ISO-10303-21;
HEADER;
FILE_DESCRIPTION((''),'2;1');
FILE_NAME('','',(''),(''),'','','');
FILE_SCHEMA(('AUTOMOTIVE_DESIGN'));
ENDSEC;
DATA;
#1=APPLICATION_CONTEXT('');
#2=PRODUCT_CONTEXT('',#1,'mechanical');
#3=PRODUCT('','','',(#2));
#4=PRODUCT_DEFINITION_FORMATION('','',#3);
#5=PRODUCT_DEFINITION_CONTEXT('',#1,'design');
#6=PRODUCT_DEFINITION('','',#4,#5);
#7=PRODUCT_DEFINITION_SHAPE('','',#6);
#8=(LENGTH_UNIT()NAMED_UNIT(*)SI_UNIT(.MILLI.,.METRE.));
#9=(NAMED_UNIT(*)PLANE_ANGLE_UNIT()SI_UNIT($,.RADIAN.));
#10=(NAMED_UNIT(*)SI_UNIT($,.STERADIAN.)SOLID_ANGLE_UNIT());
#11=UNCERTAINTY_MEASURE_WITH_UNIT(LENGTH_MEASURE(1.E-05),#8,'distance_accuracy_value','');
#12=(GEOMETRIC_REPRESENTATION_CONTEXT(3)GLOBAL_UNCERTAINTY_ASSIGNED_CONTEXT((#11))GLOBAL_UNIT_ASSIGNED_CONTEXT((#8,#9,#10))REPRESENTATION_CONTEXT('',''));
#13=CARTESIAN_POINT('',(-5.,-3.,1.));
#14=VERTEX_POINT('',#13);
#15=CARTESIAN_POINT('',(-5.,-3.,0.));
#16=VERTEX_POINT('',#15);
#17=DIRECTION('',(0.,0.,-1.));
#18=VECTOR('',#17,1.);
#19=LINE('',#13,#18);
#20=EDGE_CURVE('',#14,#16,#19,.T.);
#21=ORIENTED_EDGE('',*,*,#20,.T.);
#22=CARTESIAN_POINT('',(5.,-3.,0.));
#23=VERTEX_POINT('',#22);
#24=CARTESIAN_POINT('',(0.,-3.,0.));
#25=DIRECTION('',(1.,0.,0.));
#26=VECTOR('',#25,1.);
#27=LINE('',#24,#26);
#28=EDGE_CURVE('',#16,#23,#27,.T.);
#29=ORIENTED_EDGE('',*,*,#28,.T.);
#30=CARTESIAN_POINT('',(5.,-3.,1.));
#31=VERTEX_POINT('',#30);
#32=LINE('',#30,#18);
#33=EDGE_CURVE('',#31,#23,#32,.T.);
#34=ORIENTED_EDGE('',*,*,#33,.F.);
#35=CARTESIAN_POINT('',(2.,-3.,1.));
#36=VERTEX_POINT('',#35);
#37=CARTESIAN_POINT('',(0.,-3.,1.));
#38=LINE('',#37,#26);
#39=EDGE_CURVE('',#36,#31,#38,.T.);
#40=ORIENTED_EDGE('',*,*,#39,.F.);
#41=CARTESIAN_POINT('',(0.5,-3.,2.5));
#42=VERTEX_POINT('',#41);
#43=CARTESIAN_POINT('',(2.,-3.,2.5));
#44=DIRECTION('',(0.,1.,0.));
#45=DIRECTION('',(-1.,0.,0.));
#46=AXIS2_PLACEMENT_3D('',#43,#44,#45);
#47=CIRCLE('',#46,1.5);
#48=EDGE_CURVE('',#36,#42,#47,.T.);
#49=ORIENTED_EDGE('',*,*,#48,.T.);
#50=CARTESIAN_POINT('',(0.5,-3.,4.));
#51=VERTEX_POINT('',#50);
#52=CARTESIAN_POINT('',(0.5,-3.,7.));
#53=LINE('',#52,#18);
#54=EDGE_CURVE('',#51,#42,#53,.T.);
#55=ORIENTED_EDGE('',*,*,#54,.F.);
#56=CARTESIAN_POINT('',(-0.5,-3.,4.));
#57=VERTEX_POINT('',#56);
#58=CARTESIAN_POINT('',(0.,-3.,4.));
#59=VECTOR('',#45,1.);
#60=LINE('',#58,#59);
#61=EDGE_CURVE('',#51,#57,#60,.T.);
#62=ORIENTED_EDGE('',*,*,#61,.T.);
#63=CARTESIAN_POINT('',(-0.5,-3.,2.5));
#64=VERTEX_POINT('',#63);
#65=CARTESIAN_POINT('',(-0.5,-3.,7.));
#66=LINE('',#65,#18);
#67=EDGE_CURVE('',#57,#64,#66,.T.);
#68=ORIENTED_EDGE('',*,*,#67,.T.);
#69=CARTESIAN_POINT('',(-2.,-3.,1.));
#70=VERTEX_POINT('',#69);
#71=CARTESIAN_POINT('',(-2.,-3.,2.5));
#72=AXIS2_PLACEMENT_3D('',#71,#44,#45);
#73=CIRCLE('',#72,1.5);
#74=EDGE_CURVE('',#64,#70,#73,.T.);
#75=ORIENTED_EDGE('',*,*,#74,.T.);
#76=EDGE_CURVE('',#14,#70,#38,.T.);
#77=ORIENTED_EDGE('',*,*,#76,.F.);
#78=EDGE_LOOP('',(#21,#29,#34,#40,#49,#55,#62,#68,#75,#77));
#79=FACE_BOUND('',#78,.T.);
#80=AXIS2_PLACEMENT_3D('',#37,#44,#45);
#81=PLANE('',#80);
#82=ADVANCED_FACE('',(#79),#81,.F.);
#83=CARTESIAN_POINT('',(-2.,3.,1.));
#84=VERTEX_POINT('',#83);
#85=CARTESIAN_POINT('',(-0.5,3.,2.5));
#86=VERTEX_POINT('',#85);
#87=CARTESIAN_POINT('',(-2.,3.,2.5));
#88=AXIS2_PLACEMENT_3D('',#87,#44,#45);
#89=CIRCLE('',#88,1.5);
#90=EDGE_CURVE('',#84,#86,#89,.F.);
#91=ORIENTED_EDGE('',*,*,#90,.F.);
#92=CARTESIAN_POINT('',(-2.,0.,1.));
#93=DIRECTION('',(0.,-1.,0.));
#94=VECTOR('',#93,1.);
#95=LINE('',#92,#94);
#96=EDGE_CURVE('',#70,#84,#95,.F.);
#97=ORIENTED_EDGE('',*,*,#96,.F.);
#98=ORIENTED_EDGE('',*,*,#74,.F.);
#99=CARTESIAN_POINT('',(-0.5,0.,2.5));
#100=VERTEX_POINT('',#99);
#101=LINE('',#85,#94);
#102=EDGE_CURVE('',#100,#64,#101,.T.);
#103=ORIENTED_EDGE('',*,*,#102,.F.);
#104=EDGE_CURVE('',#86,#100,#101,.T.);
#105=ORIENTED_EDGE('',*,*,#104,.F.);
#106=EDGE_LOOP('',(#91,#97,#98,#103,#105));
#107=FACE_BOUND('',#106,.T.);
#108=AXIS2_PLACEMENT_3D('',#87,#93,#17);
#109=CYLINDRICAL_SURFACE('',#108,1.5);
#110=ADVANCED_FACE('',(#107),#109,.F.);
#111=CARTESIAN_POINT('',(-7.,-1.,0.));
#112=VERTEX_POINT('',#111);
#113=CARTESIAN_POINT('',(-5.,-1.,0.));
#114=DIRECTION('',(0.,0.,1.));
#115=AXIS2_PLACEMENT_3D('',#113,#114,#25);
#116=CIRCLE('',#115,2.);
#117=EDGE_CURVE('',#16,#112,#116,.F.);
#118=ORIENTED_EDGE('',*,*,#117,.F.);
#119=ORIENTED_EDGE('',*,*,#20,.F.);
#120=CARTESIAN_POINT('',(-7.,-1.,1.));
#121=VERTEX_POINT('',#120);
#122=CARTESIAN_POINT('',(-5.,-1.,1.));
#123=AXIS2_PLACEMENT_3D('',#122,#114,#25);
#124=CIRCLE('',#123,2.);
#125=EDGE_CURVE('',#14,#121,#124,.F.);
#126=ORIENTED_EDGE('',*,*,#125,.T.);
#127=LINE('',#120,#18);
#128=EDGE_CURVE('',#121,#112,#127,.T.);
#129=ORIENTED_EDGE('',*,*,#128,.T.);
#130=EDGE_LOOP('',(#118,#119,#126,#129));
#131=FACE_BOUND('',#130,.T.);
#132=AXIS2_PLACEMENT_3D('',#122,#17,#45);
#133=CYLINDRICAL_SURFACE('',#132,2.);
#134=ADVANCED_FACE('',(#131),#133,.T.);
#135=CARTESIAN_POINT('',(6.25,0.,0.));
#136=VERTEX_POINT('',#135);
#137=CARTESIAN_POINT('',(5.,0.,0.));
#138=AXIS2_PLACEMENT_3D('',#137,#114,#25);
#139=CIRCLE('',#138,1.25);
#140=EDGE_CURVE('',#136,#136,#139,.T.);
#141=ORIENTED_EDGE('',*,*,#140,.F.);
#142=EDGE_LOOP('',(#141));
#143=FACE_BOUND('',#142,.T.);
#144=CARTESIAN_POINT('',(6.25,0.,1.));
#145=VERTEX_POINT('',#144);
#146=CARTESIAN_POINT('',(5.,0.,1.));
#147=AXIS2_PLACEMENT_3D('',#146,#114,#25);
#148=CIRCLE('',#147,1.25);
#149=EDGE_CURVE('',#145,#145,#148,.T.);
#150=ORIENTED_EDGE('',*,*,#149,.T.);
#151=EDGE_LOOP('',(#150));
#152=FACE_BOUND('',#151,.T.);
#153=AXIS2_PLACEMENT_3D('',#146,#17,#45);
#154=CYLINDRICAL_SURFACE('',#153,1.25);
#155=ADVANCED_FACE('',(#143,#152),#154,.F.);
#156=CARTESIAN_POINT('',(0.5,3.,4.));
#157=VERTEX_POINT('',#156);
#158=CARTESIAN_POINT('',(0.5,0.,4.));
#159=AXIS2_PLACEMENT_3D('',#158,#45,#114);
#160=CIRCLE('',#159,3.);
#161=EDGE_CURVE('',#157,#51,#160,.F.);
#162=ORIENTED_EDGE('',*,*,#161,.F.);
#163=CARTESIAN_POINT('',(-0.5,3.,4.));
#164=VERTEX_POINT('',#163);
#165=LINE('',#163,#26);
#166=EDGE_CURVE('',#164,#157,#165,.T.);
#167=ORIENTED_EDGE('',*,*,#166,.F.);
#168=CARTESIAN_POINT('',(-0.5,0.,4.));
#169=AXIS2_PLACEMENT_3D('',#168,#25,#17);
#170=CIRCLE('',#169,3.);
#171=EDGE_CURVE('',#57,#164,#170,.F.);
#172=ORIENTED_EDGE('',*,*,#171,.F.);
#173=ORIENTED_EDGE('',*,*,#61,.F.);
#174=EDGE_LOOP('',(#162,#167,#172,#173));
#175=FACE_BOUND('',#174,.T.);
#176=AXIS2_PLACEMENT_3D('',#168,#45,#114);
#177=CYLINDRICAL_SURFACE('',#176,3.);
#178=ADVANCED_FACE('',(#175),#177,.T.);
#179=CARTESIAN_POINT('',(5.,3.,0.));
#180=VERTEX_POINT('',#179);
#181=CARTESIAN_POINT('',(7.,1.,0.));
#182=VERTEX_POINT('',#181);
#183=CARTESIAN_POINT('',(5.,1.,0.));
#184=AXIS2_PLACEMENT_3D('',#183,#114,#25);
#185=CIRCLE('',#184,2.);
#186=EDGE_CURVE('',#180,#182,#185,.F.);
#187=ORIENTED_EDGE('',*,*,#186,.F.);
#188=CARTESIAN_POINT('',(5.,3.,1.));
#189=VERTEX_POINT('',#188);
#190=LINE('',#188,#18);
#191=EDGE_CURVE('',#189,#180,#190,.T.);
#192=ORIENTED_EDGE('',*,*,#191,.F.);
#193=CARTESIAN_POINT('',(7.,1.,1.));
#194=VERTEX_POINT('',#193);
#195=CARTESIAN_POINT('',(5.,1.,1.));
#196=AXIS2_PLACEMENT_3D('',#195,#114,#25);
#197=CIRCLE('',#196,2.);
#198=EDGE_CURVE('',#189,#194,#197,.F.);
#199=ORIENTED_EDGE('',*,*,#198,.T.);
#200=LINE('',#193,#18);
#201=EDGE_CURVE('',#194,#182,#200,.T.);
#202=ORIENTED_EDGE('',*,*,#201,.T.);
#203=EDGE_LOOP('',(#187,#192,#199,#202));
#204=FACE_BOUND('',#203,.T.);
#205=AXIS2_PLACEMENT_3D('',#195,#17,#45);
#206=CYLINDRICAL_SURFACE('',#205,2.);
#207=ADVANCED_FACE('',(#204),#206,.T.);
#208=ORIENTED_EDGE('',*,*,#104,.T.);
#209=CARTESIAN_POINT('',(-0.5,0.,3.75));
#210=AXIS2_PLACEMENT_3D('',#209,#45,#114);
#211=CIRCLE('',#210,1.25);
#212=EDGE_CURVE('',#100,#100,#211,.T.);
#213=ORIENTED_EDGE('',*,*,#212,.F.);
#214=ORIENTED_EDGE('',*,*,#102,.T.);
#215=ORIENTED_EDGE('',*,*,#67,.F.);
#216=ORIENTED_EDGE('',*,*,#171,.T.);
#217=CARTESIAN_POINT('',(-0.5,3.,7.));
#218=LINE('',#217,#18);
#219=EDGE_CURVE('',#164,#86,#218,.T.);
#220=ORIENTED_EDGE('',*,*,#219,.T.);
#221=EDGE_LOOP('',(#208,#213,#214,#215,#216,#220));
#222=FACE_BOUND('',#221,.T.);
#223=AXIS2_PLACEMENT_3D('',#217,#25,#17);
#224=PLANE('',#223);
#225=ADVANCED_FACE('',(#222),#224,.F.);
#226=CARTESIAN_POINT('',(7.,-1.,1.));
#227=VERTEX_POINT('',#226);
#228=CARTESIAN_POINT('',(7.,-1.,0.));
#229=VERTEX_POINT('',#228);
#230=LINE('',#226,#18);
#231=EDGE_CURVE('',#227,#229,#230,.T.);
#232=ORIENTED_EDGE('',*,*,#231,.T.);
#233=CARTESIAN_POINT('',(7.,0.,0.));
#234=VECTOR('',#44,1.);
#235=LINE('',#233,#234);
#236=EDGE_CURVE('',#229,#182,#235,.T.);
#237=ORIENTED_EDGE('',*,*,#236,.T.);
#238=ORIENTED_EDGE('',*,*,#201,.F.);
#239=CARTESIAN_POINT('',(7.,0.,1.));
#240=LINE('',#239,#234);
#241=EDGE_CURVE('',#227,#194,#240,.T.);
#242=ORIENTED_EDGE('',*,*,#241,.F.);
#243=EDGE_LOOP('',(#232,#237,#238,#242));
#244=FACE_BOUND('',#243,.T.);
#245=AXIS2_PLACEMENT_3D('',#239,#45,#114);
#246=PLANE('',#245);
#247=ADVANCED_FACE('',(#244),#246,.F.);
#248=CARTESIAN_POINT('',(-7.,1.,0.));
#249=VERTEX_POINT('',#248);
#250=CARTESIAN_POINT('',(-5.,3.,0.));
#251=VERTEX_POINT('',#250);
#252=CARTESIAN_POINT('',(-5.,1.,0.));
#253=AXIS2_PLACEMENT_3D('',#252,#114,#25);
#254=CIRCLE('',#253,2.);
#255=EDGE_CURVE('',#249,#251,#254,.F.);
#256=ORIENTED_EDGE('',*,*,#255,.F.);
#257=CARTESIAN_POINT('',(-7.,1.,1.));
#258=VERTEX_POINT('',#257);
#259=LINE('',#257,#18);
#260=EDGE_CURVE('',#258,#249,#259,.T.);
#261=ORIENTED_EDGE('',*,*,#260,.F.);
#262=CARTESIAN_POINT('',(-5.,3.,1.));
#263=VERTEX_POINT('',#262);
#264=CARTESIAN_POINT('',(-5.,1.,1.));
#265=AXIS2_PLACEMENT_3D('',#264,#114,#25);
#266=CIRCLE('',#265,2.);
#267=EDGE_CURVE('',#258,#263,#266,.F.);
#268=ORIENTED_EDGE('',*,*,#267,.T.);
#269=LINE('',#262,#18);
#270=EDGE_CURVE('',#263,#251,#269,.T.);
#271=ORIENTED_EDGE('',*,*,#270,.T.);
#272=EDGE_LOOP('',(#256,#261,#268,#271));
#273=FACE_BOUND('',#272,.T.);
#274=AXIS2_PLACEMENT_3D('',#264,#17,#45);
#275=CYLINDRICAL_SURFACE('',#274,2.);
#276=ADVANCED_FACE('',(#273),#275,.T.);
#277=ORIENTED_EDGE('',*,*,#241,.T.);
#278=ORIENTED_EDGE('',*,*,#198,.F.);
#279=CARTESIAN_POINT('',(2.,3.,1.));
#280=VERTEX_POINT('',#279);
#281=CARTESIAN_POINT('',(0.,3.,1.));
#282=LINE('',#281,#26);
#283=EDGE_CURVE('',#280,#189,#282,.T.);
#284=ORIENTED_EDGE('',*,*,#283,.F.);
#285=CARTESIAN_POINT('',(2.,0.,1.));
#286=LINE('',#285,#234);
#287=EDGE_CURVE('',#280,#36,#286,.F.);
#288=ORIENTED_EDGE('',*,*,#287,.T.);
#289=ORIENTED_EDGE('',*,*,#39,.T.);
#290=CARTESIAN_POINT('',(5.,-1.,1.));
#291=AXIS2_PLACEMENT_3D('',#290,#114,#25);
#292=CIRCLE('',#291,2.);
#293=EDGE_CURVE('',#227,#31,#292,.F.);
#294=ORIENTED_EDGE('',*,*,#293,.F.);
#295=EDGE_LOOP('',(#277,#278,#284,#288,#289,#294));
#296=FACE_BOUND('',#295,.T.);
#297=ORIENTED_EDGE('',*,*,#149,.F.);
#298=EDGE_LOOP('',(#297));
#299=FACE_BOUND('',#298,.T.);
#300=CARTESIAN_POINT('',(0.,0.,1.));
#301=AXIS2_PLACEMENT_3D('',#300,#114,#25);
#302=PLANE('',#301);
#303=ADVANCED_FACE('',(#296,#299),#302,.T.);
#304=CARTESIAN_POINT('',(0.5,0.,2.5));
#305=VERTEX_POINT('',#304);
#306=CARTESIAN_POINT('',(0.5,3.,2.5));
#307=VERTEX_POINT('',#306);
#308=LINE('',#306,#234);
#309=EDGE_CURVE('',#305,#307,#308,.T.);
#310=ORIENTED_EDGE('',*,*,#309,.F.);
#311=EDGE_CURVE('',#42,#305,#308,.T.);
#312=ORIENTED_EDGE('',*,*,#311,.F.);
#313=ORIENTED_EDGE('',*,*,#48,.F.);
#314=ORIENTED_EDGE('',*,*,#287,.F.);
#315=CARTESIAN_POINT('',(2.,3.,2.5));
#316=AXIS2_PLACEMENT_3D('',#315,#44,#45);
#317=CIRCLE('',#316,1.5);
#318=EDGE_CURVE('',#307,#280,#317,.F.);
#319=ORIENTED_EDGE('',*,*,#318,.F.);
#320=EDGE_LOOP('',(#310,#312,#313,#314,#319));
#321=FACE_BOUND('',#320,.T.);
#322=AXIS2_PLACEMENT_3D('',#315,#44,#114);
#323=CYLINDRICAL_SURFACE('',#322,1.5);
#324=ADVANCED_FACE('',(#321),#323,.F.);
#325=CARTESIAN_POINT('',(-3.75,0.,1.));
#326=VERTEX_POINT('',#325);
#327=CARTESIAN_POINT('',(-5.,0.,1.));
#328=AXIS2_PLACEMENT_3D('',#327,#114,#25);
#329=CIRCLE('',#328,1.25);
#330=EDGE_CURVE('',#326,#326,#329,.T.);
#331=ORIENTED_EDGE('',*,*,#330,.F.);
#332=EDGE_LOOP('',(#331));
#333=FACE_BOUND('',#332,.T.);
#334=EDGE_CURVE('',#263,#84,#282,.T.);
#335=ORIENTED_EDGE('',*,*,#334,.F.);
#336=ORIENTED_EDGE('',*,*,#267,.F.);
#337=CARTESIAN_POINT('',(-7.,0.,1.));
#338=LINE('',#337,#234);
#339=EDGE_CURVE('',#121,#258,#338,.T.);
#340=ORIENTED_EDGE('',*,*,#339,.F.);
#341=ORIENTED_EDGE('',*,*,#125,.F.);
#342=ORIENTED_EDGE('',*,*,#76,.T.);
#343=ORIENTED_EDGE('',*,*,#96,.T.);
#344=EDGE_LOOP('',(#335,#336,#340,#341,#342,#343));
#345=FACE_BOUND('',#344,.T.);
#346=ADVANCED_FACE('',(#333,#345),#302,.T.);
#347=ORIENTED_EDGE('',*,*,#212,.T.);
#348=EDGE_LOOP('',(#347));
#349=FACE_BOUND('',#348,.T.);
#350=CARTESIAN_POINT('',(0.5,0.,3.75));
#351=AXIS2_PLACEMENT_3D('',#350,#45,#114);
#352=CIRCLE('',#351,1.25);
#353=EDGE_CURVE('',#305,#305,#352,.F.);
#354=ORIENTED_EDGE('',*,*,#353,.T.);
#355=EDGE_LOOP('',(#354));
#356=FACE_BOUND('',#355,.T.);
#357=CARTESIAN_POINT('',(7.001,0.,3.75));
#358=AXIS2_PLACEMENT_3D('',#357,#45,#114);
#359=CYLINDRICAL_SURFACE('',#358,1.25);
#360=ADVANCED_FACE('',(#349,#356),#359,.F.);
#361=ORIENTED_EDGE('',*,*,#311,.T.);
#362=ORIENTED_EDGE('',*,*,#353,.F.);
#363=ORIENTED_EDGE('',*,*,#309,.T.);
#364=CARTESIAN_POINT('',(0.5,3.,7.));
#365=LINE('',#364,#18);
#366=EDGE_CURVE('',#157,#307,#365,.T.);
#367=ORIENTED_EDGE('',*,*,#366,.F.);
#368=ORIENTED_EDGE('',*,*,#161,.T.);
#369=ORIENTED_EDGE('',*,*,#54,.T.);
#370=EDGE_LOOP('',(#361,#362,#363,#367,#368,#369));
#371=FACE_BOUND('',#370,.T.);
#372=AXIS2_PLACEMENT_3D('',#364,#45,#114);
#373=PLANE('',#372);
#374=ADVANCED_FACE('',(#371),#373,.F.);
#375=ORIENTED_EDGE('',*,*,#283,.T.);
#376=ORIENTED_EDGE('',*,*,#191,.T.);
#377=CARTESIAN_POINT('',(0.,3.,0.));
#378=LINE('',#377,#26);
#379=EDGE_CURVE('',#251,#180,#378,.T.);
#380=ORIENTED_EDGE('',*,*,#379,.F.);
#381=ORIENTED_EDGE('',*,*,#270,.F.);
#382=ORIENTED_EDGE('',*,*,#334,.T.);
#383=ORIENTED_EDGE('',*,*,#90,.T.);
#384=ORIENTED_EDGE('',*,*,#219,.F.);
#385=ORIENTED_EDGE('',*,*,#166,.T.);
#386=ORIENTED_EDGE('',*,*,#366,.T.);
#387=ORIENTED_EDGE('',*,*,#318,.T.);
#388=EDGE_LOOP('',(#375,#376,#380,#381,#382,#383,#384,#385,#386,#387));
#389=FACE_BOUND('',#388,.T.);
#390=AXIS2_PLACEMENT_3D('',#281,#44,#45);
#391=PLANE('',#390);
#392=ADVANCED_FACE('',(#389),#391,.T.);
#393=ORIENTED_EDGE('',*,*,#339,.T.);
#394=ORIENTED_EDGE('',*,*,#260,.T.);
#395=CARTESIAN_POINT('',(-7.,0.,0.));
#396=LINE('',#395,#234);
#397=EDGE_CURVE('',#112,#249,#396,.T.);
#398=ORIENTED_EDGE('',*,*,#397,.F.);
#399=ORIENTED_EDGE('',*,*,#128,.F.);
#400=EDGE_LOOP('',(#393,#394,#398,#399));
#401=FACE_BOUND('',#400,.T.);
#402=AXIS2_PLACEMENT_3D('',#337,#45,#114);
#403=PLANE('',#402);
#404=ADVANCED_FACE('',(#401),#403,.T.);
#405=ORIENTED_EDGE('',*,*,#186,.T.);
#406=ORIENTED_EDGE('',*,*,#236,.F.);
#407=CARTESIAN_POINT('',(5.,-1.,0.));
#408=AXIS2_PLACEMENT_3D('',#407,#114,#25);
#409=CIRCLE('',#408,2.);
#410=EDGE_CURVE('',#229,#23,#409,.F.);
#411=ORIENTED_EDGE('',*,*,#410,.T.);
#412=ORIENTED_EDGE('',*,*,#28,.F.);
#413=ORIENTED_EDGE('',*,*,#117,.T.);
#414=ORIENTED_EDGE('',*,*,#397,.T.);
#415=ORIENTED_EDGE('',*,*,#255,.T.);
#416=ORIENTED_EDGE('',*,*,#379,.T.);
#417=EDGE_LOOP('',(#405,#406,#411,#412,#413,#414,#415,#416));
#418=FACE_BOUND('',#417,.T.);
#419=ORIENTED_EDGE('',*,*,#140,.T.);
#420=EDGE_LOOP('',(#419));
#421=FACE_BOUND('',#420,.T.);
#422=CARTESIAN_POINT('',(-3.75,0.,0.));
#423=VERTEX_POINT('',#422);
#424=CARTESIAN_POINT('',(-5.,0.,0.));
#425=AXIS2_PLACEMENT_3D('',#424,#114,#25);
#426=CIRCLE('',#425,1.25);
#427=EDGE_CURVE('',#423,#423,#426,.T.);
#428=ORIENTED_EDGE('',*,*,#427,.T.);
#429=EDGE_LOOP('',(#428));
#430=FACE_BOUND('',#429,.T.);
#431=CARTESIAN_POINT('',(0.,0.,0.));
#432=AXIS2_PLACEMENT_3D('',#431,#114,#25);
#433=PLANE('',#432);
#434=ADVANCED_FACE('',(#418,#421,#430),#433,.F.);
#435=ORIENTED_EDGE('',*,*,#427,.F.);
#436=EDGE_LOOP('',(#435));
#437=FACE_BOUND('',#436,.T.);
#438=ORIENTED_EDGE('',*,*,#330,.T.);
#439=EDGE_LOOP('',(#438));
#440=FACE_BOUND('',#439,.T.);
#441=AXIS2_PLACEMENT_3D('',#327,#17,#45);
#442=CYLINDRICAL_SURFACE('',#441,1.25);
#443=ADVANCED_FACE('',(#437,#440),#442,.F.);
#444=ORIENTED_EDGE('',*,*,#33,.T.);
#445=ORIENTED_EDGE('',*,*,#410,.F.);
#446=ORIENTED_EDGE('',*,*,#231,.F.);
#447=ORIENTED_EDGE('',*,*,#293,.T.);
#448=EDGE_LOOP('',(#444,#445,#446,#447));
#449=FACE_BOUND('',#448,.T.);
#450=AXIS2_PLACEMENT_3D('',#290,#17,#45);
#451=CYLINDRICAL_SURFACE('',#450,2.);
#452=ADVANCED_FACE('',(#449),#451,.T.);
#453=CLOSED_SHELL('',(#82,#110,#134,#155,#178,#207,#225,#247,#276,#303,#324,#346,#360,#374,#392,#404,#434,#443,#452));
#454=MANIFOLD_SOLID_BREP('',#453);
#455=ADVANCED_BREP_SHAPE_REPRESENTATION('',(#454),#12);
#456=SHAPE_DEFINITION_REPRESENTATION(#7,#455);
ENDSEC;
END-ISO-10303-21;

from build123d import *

# Parameters (mm, degrees)
CROQUIS1_R              = 1.25
SALIENTE_EXTRUIR1_DEPTH = 1
CROQUIS2_W              = 1
CROQUIS2_H              = 6
SALIENTE_EXTRUIR2_DEPTH = 6
REDONDEO1_RADIUS        = 3
REDONDEO1_LENGTH        = 1
CORTAR_EXTRUIR1_REACH   = 12.689
CROQUIS3_R              = 1.25
REDONDEO2_R             = 1.5


with BuildPart() as part:
    # Croquis1 → Saliente-Extruir1 (new body)
    with BuildSketch(Plane.XY):
        with BuildLine():
            Line((-5, -3), (5, -3))
            ThreePointArc((5, -3), (6.414213562, -2.414213562), (7, -1))
            Line((7, -1), (7, 1))
            ThreePointArc((7, 1), (6.414213562, 2.414213562), (5, 3))
            Line((5, 3), (-5, 3))
            ThreePointArc((-5, 3), (-6.414213562, 2.414213562), (-7, 1))
            Line((-7, 1), (-7, -1))
            ThreePointArc((-7, -1), (-6.414213562, -2.414213562), (-5, -3))
        make_face()
        with Locations((-5, 0)):
            Circle(CROQUIS1_R, mode=Mode.SUBTRACT)
        with Locations((5, 0)):
            Circle(CROQUIS1_R, mode=Mode.SUBTRACT)
    extrude(amount=SALIENTE_EXTRUIR1_DEPTH)

    # Croquis2 → Saliente-Extruir2 (add)
    with BuildSketch(Plane.XY.offset(1)):
        Rectangle(CROQUIS2_W, CROQUIS2_H)
    extrude(amount=SALIENTE_EXTRUIR2_DEPTH)

    # Redondeo1: full round fillet: the end face becomes a half cylinder, R = half its width
    redondeo1_face = Plane((0, 0, 7), x_dir=(-1, 0, 0), z_dir=(0, 0, 1))  # on the end face: x along it, z out of the body
    redondeo1_slab = redondeo1_face.offset(-REDONDEO1_RADIUS / 2) * Box(REDONDEO1_LENGTH, 2 * REDONDEO1_RADIUS, REDONDEO1_RADIUS, mode=Mode.PRIVATE)  # the body's end, R deep
    redondeo1_round = Plane((0, 0, 4), x_dir=(0, 0, 1), z_dir=(-1, 0, 0)) * Cylinder(REDONDEO1_RADIUS, REDONDEO1_LENGTH, mode=Mode.PRIVATE)  # its axis R under the face
    add(redondeo1_slab - redondeo1_round, mode=Mode.SUBTRACT)

    # Croquis3 → Cortar-Extruir1 (cut, up to next)
    with BuildSketch(Plane.ZY.offset(0.5), mode=Mode.PRIVATE) as cortar_extruir1_sk1:
        with Locations((3.75, 0)):
            Circle(CROQUIS3_R)
    cortar_extruir1_tool1 = extrude(cortar_extruir1_sk1.sketch, amount=-CORTAR_EXTRUIR1_REACH, mode=Mode.PRIVATE) & part.part
    add(cortar_extruir1_tool1.solids().sort_by_distance((-0.5, 0, 3.75))[0], mode=Mode.SUBTRACT)

    # Redondeo2
    redondeo2_edges = [part.edges().sort_by_distance(p)[0] for p in [
        (0.5, 0, 1),
        (-0.5, 0, 1),
    ]]
    fillet(redondeo2_edges, radius=REDONDEO2_R - 0.0001)  # a hair under: the kernel refuses the full size


solid = part.part
